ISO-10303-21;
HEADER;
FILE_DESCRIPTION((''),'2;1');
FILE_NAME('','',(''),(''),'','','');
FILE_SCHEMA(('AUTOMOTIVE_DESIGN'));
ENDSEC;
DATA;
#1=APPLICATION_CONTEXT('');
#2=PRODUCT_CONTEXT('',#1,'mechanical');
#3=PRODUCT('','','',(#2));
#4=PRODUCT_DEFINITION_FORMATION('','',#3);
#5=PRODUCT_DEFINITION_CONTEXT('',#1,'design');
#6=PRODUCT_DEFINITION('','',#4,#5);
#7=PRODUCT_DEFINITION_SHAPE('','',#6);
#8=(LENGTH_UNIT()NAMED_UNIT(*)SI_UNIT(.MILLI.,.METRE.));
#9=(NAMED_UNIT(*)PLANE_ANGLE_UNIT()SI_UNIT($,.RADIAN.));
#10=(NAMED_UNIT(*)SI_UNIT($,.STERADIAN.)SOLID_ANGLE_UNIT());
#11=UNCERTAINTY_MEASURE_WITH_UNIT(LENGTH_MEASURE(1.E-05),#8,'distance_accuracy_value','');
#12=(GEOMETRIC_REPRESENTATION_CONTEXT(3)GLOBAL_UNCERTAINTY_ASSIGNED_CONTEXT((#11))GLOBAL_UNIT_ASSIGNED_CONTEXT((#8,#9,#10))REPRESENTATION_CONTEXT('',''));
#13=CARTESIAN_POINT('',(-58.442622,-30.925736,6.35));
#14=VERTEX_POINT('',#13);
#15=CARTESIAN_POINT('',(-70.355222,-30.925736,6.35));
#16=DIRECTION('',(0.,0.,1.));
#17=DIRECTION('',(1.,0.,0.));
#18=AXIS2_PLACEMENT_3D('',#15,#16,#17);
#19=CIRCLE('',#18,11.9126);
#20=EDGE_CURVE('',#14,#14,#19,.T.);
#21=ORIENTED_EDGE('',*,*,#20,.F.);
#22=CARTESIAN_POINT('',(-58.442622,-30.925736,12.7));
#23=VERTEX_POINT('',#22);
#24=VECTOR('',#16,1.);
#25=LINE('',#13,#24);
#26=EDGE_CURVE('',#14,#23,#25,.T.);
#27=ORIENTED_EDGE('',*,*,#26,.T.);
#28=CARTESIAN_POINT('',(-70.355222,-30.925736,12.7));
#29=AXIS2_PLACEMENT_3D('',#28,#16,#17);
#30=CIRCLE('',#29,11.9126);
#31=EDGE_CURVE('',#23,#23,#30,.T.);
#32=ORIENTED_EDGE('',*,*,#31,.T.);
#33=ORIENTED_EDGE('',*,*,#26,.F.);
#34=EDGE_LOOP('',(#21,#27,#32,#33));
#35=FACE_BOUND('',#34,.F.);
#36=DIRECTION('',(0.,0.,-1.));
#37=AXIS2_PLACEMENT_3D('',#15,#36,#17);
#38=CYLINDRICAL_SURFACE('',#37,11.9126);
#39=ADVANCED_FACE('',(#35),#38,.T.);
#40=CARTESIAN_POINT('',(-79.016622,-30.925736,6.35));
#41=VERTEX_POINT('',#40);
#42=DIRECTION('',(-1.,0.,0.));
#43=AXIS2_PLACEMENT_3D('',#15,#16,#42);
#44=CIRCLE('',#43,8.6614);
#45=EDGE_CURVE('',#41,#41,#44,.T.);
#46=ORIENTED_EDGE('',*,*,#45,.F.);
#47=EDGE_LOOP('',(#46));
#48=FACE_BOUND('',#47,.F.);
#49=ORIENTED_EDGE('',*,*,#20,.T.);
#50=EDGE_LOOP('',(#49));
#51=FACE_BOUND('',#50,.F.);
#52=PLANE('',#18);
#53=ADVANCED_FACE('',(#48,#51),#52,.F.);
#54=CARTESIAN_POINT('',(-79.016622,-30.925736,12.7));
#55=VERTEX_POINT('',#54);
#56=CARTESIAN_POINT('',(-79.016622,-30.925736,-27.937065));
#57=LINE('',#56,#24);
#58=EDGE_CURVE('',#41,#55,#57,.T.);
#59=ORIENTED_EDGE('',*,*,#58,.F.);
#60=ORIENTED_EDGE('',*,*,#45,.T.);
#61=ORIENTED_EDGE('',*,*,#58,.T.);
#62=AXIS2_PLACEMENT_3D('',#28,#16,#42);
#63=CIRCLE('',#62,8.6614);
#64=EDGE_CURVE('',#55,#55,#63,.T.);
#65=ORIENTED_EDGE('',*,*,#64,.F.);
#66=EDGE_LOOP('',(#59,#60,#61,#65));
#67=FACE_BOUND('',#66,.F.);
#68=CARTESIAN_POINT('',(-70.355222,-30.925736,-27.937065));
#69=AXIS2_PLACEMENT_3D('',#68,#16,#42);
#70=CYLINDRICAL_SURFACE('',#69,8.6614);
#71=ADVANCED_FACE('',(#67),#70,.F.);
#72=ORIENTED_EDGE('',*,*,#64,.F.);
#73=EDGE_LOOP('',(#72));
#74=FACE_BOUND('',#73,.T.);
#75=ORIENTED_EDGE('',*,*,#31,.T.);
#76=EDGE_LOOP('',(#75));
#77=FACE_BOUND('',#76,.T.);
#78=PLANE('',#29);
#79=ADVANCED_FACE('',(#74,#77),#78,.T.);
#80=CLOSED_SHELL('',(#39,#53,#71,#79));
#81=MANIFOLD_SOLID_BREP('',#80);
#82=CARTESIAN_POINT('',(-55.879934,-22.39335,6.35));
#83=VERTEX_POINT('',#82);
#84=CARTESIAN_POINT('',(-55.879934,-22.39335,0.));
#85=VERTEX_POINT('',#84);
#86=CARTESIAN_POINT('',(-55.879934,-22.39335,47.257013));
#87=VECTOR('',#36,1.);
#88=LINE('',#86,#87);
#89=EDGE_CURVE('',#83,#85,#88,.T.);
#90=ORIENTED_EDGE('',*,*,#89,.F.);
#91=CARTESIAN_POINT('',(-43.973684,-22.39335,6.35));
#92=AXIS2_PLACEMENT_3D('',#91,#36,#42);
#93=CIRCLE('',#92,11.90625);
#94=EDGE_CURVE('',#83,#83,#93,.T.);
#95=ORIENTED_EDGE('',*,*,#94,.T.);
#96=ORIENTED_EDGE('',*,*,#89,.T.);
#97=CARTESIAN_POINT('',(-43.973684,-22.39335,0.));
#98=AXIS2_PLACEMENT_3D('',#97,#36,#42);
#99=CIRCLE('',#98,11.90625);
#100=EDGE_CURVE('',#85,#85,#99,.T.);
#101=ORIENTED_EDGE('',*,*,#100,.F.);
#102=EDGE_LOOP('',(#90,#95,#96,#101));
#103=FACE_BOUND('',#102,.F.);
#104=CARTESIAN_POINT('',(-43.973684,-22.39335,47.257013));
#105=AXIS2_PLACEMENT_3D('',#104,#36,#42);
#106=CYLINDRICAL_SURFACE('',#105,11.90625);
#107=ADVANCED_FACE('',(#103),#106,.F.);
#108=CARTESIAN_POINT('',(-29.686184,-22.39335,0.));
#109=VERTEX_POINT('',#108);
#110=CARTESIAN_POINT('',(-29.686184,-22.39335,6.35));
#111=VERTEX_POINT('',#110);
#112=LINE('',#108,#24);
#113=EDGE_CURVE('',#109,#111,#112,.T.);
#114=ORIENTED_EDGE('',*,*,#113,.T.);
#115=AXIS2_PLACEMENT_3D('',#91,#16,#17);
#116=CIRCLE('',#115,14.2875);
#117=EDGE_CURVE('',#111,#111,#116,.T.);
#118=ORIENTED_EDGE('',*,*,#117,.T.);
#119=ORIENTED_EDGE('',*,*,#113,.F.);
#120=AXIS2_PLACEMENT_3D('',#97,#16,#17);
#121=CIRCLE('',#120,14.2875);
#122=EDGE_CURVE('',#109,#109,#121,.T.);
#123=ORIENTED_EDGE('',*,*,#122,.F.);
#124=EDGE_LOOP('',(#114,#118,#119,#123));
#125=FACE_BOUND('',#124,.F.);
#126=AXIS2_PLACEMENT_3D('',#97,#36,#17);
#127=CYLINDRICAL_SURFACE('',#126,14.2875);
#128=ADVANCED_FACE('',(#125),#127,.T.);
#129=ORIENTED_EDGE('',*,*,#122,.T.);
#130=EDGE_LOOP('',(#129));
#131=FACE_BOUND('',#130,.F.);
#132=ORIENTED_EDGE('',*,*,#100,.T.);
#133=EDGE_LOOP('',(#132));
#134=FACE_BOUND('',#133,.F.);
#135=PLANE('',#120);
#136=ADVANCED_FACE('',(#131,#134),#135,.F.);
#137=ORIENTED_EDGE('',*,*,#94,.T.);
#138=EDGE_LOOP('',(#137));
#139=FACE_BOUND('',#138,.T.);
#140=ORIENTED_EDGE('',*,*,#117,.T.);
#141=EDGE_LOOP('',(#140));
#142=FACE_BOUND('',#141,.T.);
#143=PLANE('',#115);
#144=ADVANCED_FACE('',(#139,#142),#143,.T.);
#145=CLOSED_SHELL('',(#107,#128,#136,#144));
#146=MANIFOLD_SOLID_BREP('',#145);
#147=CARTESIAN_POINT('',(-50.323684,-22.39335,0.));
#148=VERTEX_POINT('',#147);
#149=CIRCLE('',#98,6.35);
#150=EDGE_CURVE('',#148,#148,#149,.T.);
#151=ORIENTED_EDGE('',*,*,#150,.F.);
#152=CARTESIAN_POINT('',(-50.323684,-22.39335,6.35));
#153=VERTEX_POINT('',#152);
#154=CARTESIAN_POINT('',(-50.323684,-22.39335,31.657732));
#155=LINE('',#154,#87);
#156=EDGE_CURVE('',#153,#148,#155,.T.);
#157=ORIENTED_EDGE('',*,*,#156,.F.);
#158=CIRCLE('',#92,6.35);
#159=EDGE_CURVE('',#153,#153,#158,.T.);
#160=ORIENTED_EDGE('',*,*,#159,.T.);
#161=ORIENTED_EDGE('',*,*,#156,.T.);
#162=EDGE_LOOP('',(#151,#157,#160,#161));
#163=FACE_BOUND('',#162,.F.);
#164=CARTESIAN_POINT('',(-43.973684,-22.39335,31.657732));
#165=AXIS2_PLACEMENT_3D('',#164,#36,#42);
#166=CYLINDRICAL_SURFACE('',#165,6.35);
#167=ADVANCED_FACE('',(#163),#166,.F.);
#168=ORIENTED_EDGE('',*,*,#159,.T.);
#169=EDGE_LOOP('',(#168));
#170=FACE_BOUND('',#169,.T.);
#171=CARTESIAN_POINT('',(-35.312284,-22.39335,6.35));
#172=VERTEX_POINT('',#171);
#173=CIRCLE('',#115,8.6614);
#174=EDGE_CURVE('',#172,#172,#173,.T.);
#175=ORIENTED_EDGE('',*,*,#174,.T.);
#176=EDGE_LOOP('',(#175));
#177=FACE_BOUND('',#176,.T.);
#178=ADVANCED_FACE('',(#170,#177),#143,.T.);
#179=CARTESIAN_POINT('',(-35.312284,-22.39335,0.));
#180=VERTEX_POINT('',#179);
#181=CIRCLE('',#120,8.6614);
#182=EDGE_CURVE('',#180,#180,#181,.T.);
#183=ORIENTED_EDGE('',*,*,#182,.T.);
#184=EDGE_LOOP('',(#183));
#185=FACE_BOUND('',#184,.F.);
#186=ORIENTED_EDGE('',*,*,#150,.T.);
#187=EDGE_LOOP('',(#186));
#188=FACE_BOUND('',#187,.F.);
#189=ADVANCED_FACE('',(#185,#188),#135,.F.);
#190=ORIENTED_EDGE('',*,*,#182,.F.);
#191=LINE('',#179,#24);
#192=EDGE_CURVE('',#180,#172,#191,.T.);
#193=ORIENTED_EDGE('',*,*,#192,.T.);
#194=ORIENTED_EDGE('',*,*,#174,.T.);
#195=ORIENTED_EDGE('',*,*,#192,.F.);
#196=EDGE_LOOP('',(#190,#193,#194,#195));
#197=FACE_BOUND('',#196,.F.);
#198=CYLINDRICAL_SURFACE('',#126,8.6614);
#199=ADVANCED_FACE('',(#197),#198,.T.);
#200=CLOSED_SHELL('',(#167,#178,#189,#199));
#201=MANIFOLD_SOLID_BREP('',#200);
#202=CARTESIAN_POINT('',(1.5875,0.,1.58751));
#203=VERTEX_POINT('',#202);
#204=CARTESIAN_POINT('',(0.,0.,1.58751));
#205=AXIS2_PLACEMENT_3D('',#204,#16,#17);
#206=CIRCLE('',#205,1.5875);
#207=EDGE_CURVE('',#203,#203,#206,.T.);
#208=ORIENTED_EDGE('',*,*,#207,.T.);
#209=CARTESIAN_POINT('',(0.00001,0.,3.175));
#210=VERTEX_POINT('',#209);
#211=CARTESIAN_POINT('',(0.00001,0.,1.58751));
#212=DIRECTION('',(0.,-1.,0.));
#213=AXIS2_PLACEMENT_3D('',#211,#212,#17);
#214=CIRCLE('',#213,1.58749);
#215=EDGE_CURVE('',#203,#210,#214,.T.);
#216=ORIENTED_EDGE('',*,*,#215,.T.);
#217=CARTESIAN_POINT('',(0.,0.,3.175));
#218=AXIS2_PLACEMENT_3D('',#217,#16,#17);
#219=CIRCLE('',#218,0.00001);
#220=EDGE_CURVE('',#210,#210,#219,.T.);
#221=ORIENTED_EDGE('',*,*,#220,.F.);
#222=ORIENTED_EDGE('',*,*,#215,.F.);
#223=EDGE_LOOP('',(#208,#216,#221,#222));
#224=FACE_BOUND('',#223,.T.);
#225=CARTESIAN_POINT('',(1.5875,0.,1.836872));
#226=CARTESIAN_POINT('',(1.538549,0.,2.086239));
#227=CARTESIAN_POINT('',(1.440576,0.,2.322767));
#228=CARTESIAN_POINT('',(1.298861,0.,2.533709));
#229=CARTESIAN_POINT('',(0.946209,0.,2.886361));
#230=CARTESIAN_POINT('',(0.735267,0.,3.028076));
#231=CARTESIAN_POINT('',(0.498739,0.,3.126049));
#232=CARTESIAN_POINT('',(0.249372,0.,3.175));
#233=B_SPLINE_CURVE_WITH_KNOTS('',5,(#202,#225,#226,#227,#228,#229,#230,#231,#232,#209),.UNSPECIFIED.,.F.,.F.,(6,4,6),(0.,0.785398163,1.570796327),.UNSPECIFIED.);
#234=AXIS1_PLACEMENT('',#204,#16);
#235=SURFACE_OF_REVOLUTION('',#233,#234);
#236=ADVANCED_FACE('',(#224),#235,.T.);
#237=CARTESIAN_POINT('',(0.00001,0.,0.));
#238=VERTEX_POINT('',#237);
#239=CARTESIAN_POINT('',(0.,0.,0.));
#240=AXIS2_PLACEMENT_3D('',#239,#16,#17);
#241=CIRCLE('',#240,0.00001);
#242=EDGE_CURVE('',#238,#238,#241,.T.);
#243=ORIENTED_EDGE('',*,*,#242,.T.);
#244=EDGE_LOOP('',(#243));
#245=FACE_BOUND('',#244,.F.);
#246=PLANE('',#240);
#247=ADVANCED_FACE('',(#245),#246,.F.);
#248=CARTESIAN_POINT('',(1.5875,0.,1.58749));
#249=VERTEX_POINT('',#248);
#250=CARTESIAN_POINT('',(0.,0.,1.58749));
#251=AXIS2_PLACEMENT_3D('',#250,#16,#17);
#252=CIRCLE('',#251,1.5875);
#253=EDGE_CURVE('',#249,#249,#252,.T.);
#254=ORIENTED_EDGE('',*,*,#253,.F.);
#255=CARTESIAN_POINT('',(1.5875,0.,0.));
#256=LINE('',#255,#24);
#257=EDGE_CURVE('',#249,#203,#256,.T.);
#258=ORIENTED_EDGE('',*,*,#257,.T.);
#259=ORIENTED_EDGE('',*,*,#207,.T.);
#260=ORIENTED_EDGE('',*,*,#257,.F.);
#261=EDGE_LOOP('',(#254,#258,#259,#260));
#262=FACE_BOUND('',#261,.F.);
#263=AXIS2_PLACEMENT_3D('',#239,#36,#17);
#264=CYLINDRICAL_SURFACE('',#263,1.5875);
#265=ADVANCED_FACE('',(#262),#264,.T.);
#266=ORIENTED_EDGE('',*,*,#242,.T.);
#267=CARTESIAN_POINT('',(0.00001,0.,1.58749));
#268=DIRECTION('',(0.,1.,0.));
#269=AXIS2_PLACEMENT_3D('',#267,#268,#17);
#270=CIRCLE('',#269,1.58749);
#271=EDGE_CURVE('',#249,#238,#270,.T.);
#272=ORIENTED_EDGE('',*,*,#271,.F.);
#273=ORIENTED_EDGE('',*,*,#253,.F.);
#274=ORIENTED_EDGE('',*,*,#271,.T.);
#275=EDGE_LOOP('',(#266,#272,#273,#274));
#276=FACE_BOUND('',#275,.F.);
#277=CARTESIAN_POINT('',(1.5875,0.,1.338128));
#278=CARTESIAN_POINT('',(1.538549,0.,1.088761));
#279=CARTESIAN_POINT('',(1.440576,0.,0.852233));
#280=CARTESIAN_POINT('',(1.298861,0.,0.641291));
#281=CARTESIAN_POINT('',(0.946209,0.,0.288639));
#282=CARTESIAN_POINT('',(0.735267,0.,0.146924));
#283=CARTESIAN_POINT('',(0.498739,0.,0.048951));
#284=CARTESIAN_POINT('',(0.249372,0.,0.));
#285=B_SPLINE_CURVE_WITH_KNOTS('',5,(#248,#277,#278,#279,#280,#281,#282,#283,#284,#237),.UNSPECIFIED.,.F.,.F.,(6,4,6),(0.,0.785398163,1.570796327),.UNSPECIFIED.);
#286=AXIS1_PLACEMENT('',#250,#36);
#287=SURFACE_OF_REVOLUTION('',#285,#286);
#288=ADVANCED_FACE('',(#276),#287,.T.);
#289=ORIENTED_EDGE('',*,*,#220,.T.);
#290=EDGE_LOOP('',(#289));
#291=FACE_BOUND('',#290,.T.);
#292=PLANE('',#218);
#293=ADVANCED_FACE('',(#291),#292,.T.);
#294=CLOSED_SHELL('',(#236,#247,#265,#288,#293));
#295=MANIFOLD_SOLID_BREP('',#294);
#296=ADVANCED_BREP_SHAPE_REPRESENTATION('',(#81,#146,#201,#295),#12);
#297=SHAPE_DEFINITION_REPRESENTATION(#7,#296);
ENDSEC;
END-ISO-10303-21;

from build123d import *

# Parameters (mm, degrees)
F0_R      = 14.2875
F1_DEPTH  = 6.35
F3_D      = 23.8125
F4_R      = 8.6614
F5_DEPTH  = 6.35
F7_D      = 12.7
F8_R      = 1.5875
F9_DEPTH  = 3.175
F10_R     = 1.58749
F11_R     = 11.9126
F12_DEPTH = 6.35
F13_D     = 17.3228


# Not quite as in the source:
# - a fillet or chamfer is up to 0.001 mm smaller than in the source, because OpenCascade refuses the exact size


with BuildPart() as f1:
    # F0 (on Top) → F1 (new body)
    with BuildSketch(Plane.XY):
        with Locations((-43.9736843109, -22.3933495581)):
            Circle(F0_R)
    extrude(amount=F1_DEPTH)

    # F3 (through all)
    with Locations(Plane.XY.offset(6.35)):
        with Locations((-43.9736843109, -22.3933495581)):
            Hole(F3_D / 2)


with BuildPart() as f5:
    # F4 (on Top) → F5 (new body)
    with BuildSketch(Plane.XY):
        with Locations((-43.9736843109, -22.3933495581)):
            Circle(F4_R)
    extrude(amount=F5_DEPTH)

    # F7 (through all)
    with Locations(Plane.XY.offset(6.35)):
        with Locations((-43.9736843109, -22.3933495581)):
            Hole(F7_D / 2)


with BuildPart() as f9:
    # F8 (on Top) → F9 (new body)
    with BuildSketch(Plane.XY):
        Circle(F8_R)
    extrude(amount=F9_DEPTH)

    # F10 (radius 1.5875 in the source; OpenCascade refuses exactly that, so slightly less here)
    f10_edges = [f9.edges().sort_by_distance(p)[0] for p in [
        (-1.5875, 0, 3.175),
        (-1.5875, 0, 0),
    ]]
    fillet(f10_edges, radius=F10_R)


with BuildPart() as f12:
    # F11 (on face) → F12 (new body)
    with BuildSketch(Plane.XY.offset(6.35)):
        with Locations((-70.3552216291, -30.9257358313)):
            Circle(F11_R)
    extrude(amount=F12_DEPTH)

    # F13 (through all)
    with Locations(Plane(origin=(0, 0, 6.35), x_dir=(1, 0, 0), z_dir=(0, 0, -1))):
        with Locations((-70.3552216291, 30.9257358313)):
            Hole(F13_D / 2)


solid = Compound([f1.part, f5.part, f9.part, f12.part])
